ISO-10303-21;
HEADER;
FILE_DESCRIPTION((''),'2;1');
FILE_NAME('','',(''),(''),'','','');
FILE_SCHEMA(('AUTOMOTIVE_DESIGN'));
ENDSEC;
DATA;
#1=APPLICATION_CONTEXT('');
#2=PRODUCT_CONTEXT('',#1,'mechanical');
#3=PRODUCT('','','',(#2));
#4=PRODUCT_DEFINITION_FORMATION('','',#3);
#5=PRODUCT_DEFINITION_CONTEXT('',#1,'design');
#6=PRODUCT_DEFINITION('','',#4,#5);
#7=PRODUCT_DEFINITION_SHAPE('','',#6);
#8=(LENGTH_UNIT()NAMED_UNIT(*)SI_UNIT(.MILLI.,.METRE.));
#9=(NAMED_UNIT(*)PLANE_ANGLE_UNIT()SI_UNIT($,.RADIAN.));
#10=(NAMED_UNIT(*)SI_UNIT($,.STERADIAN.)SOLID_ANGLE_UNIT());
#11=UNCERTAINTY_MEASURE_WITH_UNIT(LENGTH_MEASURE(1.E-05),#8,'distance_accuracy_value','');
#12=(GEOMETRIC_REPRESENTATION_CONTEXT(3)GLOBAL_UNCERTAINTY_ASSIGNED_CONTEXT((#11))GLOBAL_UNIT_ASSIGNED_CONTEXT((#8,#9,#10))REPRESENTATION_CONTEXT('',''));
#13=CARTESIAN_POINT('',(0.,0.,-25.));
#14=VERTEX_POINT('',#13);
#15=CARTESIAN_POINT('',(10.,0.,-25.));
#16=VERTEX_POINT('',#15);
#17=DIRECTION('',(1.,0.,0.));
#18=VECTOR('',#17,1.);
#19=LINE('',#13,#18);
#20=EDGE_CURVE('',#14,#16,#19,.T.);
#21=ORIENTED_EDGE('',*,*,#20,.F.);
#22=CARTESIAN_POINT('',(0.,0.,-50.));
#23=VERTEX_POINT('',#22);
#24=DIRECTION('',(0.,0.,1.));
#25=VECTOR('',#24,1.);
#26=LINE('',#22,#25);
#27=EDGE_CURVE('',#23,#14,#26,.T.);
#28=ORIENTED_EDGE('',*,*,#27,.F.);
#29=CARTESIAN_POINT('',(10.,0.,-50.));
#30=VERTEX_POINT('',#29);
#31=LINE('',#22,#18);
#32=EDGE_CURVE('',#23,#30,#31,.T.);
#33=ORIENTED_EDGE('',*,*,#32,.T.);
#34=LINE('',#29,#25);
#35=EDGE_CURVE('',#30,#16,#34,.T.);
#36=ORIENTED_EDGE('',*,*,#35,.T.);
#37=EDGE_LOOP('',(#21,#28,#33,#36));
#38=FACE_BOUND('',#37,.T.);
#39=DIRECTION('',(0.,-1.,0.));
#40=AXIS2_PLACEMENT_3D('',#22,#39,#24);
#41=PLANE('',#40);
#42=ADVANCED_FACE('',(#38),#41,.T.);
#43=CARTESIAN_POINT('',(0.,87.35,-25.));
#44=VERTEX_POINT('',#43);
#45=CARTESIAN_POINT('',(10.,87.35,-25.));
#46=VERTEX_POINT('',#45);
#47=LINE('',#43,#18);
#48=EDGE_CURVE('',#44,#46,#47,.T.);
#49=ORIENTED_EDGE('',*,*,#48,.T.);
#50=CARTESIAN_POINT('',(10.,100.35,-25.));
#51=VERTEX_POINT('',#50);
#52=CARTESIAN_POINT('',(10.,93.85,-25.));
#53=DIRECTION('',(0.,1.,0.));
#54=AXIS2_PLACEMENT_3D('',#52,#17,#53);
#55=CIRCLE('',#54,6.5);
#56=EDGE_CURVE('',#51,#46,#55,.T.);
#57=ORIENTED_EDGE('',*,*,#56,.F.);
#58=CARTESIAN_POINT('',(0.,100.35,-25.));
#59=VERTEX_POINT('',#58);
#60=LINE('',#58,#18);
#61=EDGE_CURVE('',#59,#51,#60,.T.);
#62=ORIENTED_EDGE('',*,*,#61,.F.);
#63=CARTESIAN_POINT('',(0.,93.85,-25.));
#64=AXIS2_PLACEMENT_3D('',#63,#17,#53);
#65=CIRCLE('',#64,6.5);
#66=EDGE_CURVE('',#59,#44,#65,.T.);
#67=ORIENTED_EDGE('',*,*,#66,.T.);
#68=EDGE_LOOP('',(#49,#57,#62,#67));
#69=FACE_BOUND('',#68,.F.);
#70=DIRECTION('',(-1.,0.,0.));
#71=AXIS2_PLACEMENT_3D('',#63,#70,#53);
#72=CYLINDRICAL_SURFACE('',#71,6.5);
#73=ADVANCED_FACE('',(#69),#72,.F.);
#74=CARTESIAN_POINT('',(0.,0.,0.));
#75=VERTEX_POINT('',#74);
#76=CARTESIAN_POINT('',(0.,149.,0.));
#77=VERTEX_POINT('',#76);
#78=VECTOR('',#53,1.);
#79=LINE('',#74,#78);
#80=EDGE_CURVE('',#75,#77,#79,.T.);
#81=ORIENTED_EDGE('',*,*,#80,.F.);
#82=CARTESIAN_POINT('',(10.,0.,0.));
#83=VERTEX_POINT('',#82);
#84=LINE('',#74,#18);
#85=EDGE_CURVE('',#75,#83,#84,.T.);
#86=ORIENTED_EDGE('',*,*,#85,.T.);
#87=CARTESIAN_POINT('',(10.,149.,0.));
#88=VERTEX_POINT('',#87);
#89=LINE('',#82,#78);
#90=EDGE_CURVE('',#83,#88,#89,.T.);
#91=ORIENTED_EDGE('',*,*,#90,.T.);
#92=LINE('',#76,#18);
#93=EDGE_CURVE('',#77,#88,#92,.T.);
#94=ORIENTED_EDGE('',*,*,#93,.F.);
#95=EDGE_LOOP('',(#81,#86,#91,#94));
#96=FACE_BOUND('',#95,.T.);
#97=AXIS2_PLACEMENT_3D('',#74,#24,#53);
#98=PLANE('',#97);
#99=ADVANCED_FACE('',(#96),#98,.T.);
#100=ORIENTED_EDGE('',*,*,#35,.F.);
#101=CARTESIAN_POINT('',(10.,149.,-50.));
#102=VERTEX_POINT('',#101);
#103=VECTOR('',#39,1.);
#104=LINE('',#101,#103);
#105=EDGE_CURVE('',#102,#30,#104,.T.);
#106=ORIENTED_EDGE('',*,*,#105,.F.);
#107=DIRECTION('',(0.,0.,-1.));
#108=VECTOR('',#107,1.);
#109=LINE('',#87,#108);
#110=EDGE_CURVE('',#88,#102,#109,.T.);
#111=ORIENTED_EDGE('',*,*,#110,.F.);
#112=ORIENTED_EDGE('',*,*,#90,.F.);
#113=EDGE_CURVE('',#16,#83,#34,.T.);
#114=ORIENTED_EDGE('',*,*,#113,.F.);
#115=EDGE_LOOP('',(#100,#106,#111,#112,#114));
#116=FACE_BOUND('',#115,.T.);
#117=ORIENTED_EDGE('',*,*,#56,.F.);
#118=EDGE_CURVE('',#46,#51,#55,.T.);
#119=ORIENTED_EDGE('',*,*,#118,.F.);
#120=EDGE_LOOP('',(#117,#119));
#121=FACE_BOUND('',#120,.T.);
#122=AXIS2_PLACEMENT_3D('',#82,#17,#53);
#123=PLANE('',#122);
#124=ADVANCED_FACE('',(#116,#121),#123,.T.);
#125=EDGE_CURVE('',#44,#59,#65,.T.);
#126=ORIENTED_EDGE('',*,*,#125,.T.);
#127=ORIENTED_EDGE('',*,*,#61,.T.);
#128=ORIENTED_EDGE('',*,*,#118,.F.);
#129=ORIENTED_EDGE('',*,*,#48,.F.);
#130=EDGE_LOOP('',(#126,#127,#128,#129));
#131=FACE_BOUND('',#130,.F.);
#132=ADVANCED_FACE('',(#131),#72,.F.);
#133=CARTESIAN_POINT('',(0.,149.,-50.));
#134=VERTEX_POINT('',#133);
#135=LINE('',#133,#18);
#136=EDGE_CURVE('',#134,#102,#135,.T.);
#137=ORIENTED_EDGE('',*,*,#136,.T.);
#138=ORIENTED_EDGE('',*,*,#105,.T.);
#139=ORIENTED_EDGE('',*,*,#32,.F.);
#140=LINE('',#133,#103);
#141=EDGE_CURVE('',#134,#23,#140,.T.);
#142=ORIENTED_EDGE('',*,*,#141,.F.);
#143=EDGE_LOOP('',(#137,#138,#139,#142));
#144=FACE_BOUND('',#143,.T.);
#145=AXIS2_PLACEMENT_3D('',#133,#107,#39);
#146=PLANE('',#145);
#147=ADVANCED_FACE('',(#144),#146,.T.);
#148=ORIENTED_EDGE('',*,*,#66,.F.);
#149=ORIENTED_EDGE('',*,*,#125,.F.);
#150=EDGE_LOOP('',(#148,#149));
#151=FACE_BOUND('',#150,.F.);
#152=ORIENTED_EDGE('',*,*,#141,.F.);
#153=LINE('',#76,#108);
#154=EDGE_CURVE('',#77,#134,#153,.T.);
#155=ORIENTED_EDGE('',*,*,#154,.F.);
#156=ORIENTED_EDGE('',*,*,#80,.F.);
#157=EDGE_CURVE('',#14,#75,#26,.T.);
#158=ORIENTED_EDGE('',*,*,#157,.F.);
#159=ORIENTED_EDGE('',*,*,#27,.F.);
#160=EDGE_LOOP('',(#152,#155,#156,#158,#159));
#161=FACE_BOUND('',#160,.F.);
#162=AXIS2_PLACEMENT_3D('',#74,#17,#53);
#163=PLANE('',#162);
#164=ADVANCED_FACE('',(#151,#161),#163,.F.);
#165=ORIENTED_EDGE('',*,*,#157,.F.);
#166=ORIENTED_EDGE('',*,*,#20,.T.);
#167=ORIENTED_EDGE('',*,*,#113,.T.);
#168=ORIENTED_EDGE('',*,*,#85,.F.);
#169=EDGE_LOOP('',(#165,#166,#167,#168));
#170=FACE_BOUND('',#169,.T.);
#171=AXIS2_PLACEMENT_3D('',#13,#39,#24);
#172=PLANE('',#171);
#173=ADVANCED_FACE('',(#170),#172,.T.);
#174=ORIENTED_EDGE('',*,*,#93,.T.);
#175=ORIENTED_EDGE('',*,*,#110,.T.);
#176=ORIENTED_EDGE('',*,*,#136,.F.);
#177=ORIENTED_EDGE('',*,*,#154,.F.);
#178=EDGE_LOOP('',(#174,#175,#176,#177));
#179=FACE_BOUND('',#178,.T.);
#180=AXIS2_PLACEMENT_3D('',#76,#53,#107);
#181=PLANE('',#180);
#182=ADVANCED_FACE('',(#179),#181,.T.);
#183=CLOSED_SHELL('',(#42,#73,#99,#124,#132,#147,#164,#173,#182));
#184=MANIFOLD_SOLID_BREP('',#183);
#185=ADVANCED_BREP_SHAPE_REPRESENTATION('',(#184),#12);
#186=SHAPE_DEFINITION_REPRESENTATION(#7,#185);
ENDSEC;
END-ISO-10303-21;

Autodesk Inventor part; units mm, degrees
ref_plane "YZ Plane" through (0, 0, 0) normal (1, 0, 0) x (0, 1, 0)
ref_plane "XZ Plane" through (0, 0, 0) normal (0, 1, 0) x (-1, 0, 0)
ref_plane "XY Plane" through (0, 0, 0) normal (0, 0, 1) x (1, 0, 0)
sketch "Sketch1" plane through (0, 0, 0) normal (1, 0, 0) x (0, 1, 0)
  line L0 (0, 0) -> (149, 0)
  line L1 (149, 0) -> (149, -50)
  line L2 (149, -50) -> (0, -50)
  line L3 (0, -50) -> (0, 0)
  line L4 (0, -25) -> (93.85, -25)
  circle A0 centre (93.85, -25) radius 6.5
  dimension "d0" = 149
  dimension "d1" = 50
  dimension "d2" = 93.85
  dimension "d3" = 13
extrude "Extrusion1" add sketch "Sketch1" along normal blind 10
properties part number "tallwall1"
